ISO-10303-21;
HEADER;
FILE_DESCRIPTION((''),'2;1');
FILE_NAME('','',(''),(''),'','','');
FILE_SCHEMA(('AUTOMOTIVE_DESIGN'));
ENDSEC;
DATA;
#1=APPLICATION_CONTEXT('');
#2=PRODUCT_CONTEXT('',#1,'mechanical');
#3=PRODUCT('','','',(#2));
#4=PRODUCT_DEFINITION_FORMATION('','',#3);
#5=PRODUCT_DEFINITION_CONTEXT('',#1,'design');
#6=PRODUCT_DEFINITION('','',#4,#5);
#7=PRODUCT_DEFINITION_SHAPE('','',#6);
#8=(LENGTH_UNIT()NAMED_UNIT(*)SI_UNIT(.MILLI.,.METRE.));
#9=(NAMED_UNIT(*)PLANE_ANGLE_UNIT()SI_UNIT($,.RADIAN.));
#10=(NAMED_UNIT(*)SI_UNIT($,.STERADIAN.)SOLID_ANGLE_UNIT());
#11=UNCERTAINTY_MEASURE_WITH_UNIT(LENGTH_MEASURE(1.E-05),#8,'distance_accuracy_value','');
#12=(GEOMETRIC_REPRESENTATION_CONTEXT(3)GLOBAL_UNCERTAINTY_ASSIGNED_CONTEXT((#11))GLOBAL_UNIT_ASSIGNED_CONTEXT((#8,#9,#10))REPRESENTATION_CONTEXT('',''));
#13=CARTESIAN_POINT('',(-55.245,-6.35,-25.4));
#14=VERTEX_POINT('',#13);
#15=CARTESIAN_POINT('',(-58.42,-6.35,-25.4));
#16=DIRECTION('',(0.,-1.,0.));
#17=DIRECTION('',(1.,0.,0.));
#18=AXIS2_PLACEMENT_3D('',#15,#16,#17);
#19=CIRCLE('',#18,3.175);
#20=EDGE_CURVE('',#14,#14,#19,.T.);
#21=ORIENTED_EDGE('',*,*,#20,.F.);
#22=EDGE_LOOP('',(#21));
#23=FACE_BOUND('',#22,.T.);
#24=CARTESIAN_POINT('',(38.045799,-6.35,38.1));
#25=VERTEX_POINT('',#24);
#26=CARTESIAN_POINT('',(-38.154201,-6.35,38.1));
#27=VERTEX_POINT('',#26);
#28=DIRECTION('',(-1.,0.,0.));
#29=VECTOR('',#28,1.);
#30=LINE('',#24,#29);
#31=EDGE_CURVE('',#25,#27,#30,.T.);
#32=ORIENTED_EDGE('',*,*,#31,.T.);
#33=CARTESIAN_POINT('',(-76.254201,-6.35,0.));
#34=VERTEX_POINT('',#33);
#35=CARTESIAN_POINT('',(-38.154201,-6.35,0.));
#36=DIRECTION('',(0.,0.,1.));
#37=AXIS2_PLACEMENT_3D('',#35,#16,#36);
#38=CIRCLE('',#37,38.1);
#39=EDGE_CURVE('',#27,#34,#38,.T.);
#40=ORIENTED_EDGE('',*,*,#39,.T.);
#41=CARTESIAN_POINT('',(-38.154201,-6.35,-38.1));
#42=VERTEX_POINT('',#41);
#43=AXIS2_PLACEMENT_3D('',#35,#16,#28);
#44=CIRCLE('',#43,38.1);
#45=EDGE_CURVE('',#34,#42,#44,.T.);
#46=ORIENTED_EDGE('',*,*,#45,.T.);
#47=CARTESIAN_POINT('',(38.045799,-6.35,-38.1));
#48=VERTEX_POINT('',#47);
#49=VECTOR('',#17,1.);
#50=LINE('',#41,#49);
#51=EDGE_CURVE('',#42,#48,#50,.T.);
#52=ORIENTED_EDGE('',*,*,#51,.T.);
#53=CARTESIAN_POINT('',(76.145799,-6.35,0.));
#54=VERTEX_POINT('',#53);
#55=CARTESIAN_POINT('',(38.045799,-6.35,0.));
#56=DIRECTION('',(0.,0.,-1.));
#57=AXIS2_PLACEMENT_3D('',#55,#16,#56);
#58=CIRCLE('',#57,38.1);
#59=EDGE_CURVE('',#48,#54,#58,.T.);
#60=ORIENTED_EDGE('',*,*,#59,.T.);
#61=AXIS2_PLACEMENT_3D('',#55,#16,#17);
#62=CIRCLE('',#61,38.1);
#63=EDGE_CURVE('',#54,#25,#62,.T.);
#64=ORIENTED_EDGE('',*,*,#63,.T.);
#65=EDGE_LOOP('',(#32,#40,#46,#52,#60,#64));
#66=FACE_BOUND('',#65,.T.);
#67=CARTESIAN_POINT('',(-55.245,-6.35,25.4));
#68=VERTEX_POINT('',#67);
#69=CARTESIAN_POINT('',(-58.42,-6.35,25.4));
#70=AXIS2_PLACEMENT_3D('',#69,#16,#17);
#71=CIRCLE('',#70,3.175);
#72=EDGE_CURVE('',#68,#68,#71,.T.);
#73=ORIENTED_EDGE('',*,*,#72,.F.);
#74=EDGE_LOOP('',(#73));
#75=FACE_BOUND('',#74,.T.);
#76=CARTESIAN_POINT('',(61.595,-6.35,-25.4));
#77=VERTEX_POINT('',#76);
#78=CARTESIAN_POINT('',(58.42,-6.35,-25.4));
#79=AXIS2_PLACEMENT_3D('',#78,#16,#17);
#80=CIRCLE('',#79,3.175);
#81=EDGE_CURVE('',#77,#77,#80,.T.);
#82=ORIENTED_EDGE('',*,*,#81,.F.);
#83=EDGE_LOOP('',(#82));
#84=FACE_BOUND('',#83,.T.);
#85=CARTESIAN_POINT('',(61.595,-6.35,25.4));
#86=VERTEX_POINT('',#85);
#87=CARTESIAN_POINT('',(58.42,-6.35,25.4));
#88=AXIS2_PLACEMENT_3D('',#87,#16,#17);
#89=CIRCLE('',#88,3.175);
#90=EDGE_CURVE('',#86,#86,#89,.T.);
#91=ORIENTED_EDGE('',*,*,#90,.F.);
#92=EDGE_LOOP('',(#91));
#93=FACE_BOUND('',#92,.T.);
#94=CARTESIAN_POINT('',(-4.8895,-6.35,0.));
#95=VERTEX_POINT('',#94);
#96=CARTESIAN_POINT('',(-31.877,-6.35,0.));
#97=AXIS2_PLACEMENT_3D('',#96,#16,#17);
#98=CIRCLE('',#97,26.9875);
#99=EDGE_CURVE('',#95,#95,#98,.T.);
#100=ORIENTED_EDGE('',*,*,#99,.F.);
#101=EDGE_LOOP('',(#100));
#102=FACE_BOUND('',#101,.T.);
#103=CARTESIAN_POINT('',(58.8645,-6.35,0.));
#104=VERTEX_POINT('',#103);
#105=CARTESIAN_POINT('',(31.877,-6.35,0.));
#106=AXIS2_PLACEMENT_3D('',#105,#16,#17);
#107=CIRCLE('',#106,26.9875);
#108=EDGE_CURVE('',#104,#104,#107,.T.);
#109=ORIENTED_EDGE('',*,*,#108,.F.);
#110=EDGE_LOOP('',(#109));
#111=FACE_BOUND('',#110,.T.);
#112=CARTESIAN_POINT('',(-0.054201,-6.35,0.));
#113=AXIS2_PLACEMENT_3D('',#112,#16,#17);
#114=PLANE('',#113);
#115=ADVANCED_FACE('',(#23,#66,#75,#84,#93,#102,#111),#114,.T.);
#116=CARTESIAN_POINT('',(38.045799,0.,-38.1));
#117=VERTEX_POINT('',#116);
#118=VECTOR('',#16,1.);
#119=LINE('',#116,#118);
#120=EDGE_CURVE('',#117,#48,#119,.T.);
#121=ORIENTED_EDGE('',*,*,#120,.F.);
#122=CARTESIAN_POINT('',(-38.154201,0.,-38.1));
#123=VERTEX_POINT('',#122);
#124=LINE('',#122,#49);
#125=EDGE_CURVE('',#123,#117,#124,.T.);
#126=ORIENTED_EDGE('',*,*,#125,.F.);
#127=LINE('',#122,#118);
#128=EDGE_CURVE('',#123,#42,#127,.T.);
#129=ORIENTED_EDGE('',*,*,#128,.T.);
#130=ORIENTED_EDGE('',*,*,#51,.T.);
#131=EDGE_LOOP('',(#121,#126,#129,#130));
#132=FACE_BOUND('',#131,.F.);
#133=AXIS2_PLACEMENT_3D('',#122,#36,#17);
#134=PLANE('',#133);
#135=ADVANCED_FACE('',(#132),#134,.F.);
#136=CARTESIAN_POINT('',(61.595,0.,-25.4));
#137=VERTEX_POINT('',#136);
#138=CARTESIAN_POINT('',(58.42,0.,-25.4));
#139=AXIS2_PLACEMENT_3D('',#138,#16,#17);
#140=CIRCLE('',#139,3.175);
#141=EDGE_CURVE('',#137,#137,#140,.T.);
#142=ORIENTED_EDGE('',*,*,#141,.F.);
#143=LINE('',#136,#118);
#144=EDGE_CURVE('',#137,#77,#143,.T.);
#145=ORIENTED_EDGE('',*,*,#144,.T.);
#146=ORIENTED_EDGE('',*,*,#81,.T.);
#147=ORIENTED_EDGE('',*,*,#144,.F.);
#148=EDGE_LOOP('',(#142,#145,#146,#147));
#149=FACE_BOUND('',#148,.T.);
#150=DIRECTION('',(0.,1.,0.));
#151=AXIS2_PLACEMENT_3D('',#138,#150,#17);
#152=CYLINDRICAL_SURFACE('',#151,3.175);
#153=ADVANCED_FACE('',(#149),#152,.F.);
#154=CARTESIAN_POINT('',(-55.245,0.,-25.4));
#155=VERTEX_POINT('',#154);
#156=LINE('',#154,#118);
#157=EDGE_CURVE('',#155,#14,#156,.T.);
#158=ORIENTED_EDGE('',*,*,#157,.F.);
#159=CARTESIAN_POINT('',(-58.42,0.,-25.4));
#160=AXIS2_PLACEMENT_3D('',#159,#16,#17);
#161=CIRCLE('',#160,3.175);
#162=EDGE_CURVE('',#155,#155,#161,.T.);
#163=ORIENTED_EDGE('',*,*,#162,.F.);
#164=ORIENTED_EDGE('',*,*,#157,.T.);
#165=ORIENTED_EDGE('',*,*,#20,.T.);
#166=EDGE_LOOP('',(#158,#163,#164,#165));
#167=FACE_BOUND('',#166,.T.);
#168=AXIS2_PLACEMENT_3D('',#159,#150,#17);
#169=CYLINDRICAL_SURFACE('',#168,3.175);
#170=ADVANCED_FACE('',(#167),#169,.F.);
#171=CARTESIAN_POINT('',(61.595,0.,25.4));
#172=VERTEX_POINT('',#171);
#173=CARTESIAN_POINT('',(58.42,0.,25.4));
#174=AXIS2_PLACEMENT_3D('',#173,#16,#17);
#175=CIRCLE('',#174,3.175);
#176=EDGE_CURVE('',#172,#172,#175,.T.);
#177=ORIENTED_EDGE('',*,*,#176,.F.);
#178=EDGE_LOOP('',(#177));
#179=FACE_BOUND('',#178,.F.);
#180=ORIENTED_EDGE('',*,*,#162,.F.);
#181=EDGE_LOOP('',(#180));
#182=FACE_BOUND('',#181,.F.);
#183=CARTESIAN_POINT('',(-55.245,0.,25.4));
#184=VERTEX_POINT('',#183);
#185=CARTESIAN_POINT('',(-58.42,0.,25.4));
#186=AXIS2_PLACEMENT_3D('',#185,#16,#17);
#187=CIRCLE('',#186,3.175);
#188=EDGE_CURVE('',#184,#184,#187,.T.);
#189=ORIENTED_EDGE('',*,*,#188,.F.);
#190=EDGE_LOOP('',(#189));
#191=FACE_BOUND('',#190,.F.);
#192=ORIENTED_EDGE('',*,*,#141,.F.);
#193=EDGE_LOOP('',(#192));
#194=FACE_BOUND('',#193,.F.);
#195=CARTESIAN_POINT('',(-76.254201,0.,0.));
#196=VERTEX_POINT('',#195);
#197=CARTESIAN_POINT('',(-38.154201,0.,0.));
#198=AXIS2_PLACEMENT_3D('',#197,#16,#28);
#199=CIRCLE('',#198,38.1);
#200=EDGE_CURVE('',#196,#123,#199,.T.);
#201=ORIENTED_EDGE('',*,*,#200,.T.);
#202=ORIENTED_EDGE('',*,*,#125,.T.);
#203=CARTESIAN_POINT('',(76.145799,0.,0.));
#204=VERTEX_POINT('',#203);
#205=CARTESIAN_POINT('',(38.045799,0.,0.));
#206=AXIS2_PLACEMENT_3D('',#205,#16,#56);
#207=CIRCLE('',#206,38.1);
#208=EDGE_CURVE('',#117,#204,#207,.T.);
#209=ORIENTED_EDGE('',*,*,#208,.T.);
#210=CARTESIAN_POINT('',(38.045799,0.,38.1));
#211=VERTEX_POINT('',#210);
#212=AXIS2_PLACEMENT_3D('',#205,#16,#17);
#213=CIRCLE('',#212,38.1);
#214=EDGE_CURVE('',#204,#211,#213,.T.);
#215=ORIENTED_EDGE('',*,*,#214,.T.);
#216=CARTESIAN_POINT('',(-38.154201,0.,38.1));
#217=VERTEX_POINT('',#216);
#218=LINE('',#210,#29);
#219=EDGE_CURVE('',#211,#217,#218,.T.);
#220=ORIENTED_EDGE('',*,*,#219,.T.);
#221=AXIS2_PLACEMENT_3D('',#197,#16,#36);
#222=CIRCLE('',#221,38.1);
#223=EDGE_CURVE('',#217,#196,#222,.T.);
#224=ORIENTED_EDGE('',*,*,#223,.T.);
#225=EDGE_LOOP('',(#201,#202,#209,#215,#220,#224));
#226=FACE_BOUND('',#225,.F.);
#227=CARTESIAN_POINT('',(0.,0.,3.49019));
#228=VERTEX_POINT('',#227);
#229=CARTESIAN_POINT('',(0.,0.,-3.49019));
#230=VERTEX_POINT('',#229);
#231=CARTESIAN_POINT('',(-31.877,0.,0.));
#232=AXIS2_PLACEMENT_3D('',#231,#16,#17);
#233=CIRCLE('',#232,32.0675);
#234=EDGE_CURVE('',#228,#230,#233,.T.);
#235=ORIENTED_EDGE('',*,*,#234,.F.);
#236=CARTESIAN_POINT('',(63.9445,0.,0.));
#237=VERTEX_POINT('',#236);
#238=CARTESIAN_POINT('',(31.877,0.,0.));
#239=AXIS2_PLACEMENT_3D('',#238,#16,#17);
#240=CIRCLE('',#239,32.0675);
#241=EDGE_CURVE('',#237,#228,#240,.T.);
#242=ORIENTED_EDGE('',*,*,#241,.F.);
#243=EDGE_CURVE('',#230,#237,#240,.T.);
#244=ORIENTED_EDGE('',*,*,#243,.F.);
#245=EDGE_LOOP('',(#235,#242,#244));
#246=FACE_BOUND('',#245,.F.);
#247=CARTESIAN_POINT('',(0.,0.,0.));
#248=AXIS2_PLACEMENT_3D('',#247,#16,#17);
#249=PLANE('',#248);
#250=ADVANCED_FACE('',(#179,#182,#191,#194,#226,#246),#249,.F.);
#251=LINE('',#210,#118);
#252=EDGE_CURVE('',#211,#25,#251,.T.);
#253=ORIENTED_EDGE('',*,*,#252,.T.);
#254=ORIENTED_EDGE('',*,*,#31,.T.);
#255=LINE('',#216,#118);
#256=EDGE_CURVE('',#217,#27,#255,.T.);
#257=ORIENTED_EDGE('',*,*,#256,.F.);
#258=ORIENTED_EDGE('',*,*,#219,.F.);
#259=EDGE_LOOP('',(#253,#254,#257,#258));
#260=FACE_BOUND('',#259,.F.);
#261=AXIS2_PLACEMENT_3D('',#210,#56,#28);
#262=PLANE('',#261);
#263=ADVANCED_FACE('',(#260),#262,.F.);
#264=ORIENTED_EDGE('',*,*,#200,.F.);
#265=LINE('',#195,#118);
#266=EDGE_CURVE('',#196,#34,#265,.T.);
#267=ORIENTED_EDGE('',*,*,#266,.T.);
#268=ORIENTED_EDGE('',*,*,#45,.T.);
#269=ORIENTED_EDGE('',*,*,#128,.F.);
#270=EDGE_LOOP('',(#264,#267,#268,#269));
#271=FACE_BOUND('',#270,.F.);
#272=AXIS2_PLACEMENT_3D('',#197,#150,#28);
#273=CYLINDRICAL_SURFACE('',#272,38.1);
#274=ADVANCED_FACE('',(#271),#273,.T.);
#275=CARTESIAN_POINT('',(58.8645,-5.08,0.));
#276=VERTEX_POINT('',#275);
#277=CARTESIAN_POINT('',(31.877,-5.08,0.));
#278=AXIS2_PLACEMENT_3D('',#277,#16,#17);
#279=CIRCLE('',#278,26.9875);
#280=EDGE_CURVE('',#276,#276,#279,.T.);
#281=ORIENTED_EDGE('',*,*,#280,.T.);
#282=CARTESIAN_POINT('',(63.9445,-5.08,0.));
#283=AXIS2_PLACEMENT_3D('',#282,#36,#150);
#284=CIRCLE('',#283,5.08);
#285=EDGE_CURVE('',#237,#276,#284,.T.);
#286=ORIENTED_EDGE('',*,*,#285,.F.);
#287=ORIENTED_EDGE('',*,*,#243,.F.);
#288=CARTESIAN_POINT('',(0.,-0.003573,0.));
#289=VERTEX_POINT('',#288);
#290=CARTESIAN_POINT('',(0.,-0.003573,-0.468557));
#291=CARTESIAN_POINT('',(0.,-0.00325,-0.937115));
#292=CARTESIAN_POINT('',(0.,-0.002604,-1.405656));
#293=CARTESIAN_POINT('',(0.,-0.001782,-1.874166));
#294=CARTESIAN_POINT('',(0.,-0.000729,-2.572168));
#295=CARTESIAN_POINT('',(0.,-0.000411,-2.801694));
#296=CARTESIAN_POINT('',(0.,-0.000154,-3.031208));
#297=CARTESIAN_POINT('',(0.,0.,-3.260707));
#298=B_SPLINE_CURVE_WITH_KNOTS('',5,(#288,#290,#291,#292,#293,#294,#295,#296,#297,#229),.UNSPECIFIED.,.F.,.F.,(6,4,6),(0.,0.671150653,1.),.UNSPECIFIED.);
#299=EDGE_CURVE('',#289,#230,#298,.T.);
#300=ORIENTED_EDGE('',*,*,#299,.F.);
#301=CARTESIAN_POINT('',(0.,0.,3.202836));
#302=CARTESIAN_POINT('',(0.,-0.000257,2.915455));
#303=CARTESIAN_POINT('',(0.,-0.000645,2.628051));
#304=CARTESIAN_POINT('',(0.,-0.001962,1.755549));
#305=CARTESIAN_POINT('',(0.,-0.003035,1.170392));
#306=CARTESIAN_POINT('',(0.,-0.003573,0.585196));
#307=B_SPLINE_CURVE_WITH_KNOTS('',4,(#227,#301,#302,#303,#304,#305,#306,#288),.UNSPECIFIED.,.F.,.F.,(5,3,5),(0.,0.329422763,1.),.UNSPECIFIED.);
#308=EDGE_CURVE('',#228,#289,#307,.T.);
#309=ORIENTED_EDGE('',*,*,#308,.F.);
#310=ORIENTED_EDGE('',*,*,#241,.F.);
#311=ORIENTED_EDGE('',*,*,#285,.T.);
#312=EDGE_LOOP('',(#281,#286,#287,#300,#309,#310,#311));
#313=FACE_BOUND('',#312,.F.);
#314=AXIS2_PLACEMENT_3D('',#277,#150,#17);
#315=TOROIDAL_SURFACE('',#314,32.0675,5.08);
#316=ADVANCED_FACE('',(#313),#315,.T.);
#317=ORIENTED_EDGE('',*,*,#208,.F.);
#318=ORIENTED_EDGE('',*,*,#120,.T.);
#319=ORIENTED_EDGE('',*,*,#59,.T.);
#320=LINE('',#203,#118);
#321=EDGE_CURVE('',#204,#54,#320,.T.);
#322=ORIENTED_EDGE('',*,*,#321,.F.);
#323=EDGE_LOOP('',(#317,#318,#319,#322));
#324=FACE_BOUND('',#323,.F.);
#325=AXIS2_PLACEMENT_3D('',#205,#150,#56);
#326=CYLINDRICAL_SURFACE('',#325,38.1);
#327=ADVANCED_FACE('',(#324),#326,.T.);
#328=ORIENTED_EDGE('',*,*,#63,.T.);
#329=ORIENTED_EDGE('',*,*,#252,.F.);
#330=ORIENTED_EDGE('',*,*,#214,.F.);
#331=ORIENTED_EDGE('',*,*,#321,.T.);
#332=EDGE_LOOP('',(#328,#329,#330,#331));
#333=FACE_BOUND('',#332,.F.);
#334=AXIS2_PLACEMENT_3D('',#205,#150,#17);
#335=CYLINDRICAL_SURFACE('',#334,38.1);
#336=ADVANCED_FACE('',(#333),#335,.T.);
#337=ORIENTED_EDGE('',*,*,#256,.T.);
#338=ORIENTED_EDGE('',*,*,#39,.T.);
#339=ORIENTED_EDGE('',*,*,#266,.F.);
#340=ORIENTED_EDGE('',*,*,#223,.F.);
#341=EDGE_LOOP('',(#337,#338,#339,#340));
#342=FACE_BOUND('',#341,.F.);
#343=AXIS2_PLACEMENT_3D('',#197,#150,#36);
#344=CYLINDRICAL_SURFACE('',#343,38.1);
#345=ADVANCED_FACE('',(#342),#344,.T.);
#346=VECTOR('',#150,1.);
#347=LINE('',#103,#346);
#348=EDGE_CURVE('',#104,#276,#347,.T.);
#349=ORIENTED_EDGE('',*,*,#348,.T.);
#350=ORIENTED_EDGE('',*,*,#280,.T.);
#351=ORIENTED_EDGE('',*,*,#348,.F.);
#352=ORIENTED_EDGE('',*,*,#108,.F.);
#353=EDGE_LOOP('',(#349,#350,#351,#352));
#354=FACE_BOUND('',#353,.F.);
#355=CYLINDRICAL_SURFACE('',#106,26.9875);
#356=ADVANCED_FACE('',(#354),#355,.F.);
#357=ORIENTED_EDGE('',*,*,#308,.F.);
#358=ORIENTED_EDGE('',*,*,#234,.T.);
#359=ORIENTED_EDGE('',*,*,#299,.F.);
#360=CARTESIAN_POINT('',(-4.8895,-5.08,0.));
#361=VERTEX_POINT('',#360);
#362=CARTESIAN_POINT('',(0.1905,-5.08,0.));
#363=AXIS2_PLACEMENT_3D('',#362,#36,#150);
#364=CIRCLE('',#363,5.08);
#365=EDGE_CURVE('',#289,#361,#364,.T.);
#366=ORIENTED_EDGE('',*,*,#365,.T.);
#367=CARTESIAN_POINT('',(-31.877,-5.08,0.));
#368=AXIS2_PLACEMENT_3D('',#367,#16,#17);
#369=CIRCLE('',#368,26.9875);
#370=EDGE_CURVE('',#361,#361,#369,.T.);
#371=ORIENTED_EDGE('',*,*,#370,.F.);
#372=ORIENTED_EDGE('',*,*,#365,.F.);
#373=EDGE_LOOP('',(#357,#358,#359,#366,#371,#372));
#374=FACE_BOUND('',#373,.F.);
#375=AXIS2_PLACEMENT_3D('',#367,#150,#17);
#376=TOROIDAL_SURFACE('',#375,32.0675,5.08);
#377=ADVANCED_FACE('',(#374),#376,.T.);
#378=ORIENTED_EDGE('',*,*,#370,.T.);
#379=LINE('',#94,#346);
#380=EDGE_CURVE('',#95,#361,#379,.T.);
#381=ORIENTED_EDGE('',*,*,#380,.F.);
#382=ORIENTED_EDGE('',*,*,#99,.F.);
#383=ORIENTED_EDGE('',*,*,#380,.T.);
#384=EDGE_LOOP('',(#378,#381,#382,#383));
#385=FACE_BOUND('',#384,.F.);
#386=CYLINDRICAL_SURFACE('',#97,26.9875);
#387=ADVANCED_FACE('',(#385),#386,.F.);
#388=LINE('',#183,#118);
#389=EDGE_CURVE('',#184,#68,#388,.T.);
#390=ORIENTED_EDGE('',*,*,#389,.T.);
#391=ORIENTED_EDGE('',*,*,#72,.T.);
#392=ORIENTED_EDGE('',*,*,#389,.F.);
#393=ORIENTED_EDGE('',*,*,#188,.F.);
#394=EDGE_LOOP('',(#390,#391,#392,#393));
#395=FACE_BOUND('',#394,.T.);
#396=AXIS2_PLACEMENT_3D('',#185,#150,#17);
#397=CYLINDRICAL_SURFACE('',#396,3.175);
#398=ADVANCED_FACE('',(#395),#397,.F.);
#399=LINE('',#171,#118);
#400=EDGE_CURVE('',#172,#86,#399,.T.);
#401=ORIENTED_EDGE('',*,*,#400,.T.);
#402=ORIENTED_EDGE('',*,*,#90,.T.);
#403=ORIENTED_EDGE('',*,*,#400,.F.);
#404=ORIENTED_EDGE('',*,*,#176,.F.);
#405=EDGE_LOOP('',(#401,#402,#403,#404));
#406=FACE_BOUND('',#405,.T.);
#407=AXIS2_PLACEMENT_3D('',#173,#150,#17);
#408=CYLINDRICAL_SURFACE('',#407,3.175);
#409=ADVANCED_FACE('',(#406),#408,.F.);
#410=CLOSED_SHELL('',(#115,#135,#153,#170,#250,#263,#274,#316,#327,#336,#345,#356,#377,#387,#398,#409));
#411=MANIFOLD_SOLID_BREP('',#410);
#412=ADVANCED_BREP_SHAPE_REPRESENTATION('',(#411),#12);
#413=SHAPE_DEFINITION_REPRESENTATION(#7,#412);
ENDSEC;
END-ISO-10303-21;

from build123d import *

# Parameters (mm, degrees)
F0_R     = 3.175
F1_DEPTH = 6.35
F2_DEPTH = 6.35
F4_R     = 26.9875
F5_DEPTH = 25.4


# Not quite as in the source:
# - a fillet or chamfer that OpenCascade refuses, or shapes differently, is made with other operations: its cross-section is extruded or revolved along the edge and cut away or added


with BuildPart() as f1:
    # F0 (on Front) → F1 (new body)
    with BuildSketch(Plane.XZ):
        with BuildLine():
            ThreePointArc((-76.2542010712, 0), (-65.0949694344, -26.9407683632), (-38.1542010712, -38.1))
            Line((-38.1542010712, -38.1), (38.0457989288, -38.1))
            ThreePointArc((38.0457989288, -38.1), (64.986567292, -26.9407683632), (76.1457989288, 0))
            ThreePointArc((76.1457989288, 0), (64.986567292, 26.9407683632), (38.0457989288, 38.1))
            Line((38.0457989288, 38.1), (-38.1542010712, 38.1))
            ThreePointArc((-38.1542010712, 38.1), (-65.0949694344, 26.9407683632), (-76.2542010712, 0))
        make_face()
        with Locations((-58.42, -25.4)):
            Circle(F0_R, mode=Mode.SUBTRACT)
        with Locations((58.42, -25.4)):
            Circle(F0_R, mode=Mode.SUBTRACT)
        with Locations((-58.42, 25.4)):
            Circle(F0_R, mode=Mode.SUBTRACT)
        with BuildLine():
            ThreePointArc((-31.75, -31.75), (-63.5, 0), (-31.75, 31.75))
            Line((-31.75, 31.75), (31.75, 31.75))
            ThreePointArc((31.75, 31.75), (63.5, 0), (31.75, -31.75))
            Line((31.75, -31.75), (-31.75, -31.75))
        make_face(mode=Mode.SUBTRACT)
        with Locations((58.42, 25.4)):
            Circle(F0_R, mode=Mode.SUBTRACT)
    extrude(amount=F1_DEPTH)

    # F0 (on Front) → F2 (join)
    with BuildSketch(Plane.XZ):
        with BuildLine():
            Line((31.75, 31.75), (-31.75, 31.75))
            ThreePointArc((-31.75, 31.75), (-63.5, 0), (-31.75, -31.75))
            Line((-31.75, -31.75), (31.75, -31.75))
            ThreePointArc((31.75, -31.75), (63.5, 0), (31.75, 31.75))
        make_face()
    extrude(amount=F2_DEPTH)

    # F4 (on face) → F5 (cut)
    with BuildSketch(Plane.XZ.offset(6.35)):
        with Locations((-31.877, 0)):
            Circle(F4_R)
        with Locations((31.877, 0)):
            Circle(F4_R)
    extrude(amount=-F5_DEPTH, mode=Mode.SUBTRACT)

    # F6: fillet of radius 5.08 on 2 edges, made by hand

    # F6_s1 → F6_t2 (revolve, cut)
    with BuildSketch(Plane.XY):
        with BuildLine():
            ThreePointArc((63.9445, 0), (60.3523975516, -1.4878975516), (58.8645, -5.08))
            Line((58.8645, -5.08), (58.8645, 0))
            Line((58.8645, 0), (63.9445, 0))
        make_face()
    revolve(axis=Axis((31.877, 0, 0), (0, -1, 0)), mode=Mode.SUBTRACT)

    # F6_s3 → F6_t4 (revolve, cut)
    with BuildSketch(Plane.XY):
        with BuildLine():
            ThreePointArc((0.1905, 0), (-3.4016024484, -1.4878975516), (-4.8895, -5.08))
            Line((-4.8895, -5.08), (-4.8895, 0))
            Line((-4.8895, 0), (0.1905, 0))
        make_face()
    revolve(axis=Axis((-31.877, 0, 0), (0, -1, 0)), mode=Mode.SUBTRACT)


solid = f1.part
